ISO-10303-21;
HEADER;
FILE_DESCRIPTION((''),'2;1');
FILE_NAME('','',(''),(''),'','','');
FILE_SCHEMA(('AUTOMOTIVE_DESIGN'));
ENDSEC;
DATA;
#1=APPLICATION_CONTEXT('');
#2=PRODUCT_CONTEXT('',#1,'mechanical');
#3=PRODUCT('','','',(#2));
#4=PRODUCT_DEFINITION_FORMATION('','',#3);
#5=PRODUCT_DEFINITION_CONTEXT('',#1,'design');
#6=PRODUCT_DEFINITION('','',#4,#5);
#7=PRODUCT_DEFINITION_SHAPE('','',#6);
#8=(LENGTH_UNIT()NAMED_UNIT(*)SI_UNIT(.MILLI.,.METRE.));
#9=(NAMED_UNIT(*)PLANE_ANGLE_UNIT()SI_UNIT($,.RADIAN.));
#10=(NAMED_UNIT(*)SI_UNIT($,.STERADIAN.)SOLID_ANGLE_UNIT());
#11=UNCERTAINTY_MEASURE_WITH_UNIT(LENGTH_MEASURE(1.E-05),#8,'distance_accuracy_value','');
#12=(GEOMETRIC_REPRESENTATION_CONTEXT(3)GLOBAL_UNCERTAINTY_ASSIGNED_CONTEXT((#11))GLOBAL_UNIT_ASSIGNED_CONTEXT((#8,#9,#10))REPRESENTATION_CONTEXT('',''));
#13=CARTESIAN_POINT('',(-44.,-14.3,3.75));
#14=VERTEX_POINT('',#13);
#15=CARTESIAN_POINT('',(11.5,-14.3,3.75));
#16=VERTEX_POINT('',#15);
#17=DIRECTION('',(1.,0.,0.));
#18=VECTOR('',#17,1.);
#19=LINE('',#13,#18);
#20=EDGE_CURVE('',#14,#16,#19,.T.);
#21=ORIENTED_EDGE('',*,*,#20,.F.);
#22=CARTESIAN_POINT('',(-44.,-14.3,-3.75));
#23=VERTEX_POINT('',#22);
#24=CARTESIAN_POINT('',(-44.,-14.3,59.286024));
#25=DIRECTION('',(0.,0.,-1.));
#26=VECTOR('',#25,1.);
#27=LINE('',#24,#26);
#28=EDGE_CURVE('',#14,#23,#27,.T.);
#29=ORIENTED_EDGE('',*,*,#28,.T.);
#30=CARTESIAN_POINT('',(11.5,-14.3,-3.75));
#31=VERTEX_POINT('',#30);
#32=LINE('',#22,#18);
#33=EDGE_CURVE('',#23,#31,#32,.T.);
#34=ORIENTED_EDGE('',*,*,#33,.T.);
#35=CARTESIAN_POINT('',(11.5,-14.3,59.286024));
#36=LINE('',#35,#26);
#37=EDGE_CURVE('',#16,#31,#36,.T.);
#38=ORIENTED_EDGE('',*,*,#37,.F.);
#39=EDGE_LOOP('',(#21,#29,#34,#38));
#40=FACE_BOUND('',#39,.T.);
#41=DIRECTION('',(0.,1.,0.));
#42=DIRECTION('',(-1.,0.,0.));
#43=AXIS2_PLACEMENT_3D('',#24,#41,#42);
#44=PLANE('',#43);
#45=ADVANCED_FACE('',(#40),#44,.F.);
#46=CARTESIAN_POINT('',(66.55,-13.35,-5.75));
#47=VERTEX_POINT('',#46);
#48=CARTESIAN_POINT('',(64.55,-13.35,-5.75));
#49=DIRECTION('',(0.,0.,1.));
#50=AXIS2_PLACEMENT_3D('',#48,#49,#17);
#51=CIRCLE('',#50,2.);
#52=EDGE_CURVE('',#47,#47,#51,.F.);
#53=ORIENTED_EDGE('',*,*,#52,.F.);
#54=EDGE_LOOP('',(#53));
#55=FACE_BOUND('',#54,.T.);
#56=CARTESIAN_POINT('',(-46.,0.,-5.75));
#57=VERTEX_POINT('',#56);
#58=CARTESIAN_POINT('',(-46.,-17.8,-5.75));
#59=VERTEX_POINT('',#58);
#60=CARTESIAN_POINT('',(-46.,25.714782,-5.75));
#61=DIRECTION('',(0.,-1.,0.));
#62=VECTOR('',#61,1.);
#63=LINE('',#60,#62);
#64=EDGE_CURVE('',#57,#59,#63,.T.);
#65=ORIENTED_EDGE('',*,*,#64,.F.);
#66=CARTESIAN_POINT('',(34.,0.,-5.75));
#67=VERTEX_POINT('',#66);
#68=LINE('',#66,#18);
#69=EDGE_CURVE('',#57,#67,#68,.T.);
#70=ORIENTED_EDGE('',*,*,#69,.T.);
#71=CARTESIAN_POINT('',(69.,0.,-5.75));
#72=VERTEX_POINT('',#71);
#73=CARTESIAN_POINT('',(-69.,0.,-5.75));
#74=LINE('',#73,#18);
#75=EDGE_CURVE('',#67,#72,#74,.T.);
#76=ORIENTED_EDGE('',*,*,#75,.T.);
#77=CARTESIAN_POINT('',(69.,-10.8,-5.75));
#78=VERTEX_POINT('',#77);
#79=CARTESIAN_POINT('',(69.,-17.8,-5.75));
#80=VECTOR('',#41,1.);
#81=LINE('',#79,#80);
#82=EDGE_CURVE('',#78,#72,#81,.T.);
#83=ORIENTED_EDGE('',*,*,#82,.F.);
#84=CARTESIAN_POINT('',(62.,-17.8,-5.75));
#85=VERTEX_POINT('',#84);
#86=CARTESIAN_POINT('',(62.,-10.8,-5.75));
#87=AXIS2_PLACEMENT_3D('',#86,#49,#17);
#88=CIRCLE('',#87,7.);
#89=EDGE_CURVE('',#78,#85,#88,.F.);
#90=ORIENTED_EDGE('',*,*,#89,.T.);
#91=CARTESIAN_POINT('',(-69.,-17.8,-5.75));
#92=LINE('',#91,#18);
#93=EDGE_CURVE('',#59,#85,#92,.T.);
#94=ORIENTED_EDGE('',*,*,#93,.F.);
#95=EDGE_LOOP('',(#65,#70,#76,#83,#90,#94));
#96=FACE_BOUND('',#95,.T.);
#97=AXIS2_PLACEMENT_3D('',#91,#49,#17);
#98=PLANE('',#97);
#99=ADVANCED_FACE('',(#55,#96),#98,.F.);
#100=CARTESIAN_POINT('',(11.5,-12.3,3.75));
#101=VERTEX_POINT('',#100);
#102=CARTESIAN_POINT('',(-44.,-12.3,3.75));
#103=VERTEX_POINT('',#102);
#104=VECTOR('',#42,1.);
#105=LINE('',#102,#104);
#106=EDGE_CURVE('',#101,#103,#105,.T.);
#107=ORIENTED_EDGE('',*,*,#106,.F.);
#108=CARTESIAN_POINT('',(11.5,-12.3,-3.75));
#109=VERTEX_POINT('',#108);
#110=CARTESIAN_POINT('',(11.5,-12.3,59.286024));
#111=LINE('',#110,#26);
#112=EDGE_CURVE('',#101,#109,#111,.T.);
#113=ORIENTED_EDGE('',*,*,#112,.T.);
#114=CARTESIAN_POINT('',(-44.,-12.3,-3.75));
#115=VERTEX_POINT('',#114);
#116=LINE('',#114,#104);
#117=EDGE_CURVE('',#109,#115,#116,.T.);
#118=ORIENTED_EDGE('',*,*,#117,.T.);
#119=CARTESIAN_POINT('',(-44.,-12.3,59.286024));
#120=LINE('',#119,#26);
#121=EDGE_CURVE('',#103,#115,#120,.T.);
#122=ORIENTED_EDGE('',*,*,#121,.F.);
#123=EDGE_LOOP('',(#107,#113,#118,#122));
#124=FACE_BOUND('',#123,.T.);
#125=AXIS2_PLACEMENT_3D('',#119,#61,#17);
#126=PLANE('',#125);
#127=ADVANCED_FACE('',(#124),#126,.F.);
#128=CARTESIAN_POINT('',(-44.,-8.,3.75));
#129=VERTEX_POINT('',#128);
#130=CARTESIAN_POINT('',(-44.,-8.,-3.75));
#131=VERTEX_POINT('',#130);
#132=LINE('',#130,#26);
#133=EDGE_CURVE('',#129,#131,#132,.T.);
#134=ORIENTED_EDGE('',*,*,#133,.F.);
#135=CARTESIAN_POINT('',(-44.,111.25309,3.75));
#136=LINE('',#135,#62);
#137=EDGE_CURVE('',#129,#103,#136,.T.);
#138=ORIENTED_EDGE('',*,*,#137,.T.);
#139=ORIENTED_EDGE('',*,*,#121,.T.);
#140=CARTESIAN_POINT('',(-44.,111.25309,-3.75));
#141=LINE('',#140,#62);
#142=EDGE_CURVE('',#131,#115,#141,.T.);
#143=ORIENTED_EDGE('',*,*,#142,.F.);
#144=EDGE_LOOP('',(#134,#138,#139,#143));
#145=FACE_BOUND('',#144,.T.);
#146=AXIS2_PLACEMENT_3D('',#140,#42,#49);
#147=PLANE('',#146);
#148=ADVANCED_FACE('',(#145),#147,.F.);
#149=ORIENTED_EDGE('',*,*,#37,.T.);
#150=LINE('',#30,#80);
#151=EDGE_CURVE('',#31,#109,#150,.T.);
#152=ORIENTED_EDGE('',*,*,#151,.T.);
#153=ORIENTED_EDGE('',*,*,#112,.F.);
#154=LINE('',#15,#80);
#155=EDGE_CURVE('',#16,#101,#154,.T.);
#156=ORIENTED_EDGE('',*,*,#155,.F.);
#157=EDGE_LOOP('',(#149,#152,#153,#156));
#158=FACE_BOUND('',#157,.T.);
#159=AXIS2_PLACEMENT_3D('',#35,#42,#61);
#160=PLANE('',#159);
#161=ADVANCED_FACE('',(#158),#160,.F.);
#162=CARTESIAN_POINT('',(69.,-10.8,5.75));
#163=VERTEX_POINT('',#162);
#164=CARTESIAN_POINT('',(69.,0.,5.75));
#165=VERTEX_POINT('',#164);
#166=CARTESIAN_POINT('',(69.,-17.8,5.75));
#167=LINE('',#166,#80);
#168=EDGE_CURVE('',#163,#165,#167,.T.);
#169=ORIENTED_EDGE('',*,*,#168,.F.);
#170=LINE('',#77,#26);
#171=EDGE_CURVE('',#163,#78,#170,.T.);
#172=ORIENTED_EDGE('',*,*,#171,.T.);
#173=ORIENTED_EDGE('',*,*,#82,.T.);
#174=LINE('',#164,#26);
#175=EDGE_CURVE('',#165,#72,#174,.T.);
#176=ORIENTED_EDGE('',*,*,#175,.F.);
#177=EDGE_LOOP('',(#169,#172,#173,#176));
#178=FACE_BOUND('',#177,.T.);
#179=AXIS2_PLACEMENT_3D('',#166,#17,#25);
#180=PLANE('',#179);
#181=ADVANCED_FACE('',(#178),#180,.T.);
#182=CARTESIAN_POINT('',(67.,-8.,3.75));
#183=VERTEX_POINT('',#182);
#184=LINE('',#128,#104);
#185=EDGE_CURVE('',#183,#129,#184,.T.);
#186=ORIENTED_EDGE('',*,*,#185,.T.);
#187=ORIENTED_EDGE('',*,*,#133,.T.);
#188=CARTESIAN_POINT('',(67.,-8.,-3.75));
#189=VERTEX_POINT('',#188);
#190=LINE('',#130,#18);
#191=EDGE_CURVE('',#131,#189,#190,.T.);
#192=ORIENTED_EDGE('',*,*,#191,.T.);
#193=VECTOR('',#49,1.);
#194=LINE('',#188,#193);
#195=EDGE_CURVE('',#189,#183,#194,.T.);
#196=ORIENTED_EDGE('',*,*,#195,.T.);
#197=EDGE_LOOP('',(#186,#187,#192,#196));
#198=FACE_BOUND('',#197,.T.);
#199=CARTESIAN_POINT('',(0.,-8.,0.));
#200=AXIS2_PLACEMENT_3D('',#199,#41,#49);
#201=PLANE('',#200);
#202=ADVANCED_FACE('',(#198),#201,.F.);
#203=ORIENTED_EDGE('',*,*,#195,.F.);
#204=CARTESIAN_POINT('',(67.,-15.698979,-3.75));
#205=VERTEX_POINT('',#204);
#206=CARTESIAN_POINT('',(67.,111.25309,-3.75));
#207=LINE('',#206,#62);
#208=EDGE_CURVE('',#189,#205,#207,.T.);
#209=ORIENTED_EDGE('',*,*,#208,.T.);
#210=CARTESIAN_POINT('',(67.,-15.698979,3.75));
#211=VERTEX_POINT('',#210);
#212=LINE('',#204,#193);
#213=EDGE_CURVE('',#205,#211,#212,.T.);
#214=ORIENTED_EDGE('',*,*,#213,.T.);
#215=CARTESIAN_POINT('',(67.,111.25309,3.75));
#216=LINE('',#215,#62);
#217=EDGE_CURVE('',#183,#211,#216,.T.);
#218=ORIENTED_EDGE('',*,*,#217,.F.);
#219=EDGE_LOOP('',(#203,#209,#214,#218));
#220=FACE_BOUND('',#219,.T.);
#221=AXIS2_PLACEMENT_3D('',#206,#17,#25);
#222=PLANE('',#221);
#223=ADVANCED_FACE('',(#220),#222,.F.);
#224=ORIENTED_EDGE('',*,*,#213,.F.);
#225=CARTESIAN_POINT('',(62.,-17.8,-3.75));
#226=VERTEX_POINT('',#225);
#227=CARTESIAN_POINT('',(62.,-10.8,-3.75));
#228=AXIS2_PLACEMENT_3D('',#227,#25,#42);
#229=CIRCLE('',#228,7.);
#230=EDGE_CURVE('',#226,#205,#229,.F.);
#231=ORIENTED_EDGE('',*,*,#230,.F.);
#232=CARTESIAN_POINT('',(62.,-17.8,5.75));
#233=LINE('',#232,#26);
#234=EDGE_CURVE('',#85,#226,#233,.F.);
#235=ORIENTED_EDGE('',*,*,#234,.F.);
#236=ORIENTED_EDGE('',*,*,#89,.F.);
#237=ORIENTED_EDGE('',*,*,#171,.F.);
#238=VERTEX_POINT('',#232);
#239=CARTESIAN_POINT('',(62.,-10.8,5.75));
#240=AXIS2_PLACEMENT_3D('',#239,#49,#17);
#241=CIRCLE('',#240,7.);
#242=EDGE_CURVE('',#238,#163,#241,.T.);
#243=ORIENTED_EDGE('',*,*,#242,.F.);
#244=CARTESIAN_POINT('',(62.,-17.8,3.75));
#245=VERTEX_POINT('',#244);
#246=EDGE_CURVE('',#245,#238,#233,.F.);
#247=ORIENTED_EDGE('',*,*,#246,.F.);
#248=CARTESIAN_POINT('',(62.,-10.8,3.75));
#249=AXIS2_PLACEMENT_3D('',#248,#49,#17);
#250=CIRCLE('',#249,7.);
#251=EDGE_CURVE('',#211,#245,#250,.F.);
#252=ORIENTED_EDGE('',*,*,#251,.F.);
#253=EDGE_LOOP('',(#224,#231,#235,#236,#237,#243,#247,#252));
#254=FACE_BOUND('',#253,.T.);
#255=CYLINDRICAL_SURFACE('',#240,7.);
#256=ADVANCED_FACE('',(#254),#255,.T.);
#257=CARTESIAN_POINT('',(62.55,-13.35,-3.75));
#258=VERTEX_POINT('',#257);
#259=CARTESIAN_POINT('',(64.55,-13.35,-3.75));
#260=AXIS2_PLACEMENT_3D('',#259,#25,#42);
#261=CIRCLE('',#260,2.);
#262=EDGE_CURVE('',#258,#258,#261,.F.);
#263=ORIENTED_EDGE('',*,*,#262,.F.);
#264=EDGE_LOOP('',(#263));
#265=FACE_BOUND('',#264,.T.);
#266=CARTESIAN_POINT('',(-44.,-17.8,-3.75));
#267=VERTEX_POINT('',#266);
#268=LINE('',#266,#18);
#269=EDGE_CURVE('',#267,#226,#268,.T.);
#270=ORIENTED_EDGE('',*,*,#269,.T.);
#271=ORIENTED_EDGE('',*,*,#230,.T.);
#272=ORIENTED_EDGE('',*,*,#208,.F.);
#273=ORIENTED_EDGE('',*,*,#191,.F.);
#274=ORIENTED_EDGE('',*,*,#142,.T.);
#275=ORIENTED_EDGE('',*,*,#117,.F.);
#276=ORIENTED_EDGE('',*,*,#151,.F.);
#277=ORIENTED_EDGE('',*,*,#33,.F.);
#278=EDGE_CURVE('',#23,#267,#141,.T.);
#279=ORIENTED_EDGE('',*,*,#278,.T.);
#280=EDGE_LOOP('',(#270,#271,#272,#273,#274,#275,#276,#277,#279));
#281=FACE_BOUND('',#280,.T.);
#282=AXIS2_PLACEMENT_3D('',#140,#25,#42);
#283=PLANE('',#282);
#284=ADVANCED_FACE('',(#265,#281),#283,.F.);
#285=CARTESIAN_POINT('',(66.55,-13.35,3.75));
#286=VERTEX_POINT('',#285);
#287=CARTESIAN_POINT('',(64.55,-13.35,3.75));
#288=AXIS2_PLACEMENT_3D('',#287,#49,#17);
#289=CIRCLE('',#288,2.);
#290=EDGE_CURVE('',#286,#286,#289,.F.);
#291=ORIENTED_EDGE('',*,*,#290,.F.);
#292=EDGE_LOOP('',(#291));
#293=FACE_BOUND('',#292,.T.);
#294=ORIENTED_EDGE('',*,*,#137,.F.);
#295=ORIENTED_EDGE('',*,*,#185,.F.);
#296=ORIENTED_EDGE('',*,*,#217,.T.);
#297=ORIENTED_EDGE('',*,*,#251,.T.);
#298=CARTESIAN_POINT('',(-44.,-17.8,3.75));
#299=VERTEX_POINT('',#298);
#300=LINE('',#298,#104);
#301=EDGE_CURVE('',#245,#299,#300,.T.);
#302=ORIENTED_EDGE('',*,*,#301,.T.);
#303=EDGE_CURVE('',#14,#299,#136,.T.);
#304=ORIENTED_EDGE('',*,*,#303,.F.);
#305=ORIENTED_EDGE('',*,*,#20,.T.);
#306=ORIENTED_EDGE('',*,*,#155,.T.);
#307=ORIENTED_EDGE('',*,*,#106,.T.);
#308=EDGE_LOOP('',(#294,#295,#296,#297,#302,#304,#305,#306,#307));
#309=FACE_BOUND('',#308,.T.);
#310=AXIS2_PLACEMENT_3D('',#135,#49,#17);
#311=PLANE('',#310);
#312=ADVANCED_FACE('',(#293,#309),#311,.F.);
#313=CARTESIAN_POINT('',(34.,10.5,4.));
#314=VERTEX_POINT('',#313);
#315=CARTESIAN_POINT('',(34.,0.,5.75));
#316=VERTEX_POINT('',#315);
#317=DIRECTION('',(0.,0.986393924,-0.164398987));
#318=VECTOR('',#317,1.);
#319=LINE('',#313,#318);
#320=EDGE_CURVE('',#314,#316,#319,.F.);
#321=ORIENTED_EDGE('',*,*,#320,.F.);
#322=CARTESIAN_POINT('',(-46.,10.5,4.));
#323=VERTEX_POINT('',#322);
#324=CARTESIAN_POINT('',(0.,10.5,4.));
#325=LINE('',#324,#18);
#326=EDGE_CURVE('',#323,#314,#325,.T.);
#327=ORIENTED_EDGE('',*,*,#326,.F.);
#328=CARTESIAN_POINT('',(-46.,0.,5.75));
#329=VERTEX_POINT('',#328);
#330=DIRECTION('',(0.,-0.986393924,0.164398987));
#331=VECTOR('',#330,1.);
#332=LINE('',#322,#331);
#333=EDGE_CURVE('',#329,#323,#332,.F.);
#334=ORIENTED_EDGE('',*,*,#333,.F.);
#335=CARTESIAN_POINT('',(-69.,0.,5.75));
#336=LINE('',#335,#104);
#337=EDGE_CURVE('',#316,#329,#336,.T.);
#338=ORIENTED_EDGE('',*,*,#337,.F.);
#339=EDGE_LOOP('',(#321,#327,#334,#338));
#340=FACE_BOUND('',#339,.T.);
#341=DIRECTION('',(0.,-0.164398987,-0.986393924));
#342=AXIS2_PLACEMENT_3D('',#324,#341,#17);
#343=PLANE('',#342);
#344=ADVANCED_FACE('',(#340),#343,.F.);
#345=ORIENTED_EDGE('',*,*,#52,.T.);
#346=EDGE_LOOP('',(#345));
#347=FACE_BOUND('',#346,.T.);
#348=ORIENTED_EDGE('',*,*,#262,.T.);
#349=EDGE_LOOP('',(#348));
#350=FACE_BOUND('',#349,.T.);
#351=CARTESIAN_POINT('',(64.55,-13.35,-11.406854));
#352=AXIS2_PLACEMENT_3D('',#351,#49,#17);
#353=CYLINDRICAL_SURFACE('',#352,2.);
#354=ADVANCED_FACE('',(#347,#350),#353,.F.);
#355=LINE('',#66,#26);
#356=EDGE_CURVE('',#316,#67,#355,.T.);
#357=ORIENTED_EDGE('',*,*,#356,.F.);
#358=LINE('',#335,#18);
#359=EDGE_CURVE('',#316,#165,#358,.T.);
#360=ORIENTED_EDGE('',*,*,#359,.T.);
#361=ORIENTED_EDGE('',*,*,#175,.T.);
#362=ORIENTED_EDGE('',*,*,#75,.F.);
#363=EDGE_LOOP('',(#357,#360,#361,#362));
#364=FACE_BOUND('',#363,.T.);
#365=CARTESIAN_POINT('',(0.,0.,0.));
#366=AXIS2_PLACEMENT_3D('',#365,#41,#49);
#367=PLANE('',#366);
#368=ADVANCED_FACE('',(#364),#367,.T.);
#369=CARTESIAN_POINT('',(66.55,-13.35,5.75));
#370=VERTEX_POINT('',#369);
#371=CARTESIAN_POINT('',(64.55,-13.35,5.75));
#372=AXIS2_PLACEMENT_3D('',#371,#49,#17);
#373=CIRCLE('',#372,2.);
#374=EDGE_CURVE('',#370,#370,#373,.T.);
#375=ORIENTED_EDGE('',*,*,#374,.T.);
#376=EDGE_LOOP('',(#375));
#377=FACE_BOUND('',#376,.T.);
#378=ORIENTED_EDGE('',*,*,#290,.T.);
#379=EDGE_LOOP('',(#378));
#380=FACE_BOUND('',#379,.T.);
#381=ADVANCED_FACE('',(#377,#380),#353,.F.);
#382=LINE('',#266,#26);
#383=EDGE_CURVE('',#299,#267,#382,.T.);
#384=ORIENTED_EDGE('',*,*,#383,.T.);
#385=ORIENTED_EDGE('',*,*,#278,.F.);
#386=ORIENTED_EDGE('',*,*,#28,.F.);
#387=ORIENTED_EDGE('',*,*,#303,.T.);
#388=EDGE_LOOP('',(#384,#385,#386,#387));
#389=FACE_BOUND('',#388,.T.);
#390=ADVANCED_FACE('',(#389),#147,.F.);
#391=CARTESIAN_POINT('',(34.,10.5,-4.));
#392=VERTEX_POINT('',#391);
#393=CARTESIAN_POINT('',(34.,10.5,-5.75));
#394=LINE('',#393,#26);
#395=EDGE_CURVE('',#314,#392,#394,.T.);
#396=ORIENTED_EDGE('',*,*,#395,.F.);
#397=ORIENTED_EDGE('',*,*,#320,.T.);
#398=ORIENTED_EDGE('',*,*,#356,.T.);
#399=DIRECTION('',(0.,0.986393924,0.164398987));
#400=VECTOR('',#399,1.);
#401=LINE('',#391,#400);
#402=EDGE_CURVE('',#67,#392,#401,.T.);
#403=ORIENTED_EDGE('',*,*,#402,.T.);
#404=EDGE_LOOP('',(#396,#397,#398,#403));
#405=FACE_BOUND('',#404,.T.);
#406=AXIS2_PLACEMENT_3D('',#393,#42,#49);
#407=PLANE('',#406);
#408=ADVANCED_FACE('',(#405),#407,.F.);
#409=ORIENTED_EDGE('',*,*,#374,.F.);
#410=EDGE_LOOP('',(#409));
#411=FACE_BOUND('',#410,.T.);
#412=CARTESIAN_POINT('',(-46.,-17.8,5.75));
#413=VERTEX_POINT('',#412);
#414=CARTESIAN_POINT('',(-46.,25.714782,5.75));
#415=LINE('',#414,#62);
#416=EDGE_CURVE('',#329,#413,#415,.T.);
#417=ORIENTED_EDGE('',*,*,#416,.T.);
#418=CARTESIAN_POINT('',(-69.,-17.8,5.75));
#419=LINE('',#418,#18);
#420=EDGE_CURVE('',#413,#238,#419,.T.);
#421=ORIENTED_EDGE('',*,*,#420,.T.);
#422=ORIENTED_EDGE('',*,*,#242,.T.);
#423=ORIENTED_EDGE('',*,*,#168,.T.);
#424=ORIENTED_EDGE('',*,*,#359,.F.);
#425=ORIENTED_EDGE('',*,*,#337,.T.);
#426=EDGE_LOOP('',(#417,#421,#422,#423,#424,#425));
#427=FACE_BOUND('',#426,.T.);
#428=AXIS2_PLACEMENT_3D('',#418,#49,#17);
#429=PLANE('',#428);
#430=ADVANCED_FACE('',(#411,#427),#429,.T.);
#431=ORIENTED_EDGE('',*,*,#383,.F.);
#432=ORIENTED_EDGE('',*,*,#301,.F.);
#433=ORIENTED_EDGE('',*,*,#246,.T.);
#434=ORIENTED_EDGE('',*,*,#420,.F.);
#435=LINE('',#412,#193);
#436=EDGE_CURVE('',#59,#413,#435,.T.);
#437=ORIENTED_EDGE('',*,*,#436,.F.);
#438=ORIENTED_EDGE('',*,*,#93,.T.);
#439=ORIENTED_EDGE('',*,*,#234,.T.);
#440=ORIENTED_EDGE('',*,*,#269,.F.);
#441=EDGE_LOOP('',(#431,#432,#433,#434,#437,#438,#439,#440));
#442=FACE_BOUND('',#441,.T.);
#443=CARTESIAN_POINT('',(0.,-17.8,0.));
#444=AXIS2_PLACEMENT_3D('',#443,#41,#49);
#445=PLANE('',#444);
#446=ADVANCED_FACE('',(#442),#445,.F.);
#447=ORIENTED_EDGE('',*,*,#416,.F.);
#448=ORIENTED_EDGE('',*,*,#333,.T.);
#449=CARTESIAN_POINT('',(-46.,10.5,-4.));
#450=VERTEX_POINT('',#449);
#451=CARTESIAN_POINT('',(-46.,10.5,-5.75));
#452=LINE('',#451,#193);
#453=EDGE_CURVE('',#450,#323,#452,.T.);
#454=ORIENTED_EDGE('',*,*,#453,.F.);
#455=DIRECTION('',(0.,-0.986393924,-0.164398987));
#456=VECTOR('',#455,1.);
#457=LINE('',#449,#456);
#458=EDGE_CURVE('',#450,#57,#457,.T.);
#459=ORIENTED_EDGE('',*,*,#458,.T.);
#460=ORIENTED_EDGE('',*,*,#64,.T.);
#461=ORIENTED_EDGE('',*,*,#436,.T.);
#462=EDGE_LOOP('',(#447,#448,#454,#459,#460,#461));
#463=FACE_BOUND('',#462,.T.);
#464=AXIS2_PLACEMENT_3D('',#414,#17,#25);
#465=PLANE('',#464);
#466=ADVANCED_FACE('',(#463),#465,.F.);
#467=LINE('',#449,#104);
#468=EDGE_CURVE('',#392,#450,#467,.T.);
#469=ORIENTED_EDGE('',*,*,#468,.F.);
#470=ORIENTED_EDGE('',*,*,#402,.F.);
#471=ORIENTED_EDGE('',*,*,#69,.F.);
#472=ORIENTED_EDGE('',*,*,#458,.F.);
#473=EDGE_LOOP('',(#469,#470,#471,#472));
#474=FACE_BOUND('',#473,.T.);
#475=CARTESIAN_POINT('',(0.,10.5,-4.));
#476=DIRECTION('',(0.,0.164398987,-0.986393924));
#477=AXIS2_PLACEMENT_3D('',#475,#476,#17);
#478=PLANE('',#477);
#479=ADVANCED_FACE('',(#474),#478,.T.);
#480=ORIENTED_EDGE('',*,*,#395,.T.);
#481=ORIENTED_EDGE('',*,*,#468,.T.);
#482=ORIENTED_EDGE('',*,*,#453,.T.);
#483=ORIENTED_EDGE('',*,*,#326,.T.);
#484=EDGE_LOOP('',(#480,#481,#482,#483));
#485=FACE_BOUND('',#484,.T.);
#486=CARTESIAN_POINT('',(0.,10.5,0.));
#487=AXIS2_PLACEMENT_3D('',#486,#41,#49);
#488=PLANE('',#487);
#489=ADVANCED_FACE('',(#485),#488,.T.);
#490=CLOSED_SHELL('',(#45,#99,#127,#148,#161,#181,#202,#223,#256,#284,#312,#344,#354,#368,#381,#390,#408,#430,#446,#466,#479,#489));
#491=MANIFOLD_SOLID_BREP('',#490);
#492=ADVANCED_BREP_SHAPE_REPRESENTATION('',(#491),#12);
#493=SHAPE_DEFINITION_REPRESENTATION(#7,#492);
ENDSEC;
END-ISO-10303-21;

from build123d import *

# Parameters (mm, degrees)
SKETCH1_W           = 138
SKETCH1_H           = 11.5
BOSS_EXTRUDE1_DEPTH = 17.8
SKETCH8_R           = 2
CUT_EXTRUDE4_DEPTH  = 11.5
SKETCH11_W          = 23
SKETCH11_H          = 11.5
CUT_EXTRUDE5_DEPTH  = 17.8
SKETCH14_W          = 80
SKETCH14_H          = 11.5
BOSS_EXTRUDE4_DEPTH = 10.5
CHAMFER1_SIZE       = 10.5
CHAMFER1_SIZE2      = 1.75
CHAMFER2_SIZE       = 10.5
CHAMFER2_SIZE2      = 1.75
SKETCH12_W          = 111
SKETCH12_H          = 7.5
CUT_EXTRUDE6_DEPTH  = 9.8
SKETCH13_W          = 55.5
SKETCH13_H          = 2
BOSS_EXTRUDE3_DEPTH = 7.5
FILLET1_R           = 7


with BuildPart() as part:
    # Sketch1 → Boss-Extrude1 (new body)
    with BuildSketch(Plane(origin=(0, 0, 0), x_dir=(1, 0, 0), z_dir=(0, 1, 0))):
        Rectangle(SKETCH1_W, SKETCH1_H)
    extrude(amount=-BOSS_EXTRUDE1_DEPTH)

    # Sketch8 → Cut-Extrude4 (cut)
    with BuildSketch(Plane.XY.offset(5.75)):
        with Locations((64.55, -13.35)):
            Circle(SKETCH8_R)
    extrude(amount=-CUT_EXTRUDE4_DEPTH, mode=Mode.SUBTRACT)

    # Sketch11 → Cut-Extrude5 (cut)
    with BuildSketch(Plane.XZ.offset(17.8)):
        with Locations((-57.5, 0)):
            Rectangle(SKETCH11_W, SKETCH11_H)
    extrude(amount=-CUT_EXTRUDE5_DEPTH, mode=Mode.SUBTRACT)

    # Sketch14 → Boss-Extrude4 (add)
    with BuildSketch(Plane(origin=(0, 0, 0), x_dir=(1, 0, 0), z_dir=(0, 1, 0))):
        with Locations((-6, 0)):
            Rectangle(SKETCH14_W, SKETCH14_H)
    extrude(amount=BOSS_EXTRUDE4_DEPTH)

    # Chamfer1
    chamfer1_edges = [part.edges().sort_by_distance(p)[0] for p in [
        (-6, 10.5, 5.75),
    ]]
    chamfer1_side = [part.faces().sort_by_distance(p)[0] for p in [
        (6.154026517, -4.745470138, 5.75),
    ]]
    chamfer(chamfer1_edges, length=CHAMFER1_SIZE, length2=CHAMFER1_SIZE2, reference=chamfer1_side[0])

    # Chamfer2
    chamfer2_edges = [part.edges().sort_by_distance(p)[0] for p in [
        (-6, 10.5, -5.75),
    ]]
    chamfer2_side = [part.faces().sort_by_distance(p)[0] for p in [
        (6.154026517, -4.745470138, -5.75),
    ]]
    chamfer(chamfer2_edges, length=CHAMFER2_SIZE, length2=CHAMFER2_SIZE2, reference=chamfer2_side[0])

    # Sketch12 → Cut-Extrude6 (cut)
    with BuildSketch(Plane.XZ.offset(17.8)):
        with Locations((11.5, 0)):
            Rectangle(SKETCH12_W, SKETCH12_H)
    extrude(amount=-CUT_EXTRUDE6_DEPTH, mode=Mode.SUBTRACT)

    # Sketch13 → Boss-Extrude3 (add)
    with BuildSketch(Plane.XY.offset(-3.75)):
        with Locations((-16.25, -13.3)):
            Rectangle(SKETCH13_W, SKETCH13_H)
    extrude(amount=BOSS_EXTRUDE3_DEPTH)

    # Fillet1
    # the kernel refuses this fillet: 7 mm, written as the material it takes off along each edge
    with BuildSketch(Plane(origin=(69, -17.8, 23.25), x_dir=(-1, 0, 0), z_dir=(0, 0, -1))) as fillet1_piece_1:
        with BuildLine():
            CenterArc((FILLET1_R, FILLET1_R), FILLET1_R, 180, 90)
            Line((0, FILLET1_R), (0, 0))
            Line((0, 0), (FILLET1_R, 0))
        make_face()
    extrude(amount=46.5, mode=Mode.SUBTRACT)


solid = part.part
